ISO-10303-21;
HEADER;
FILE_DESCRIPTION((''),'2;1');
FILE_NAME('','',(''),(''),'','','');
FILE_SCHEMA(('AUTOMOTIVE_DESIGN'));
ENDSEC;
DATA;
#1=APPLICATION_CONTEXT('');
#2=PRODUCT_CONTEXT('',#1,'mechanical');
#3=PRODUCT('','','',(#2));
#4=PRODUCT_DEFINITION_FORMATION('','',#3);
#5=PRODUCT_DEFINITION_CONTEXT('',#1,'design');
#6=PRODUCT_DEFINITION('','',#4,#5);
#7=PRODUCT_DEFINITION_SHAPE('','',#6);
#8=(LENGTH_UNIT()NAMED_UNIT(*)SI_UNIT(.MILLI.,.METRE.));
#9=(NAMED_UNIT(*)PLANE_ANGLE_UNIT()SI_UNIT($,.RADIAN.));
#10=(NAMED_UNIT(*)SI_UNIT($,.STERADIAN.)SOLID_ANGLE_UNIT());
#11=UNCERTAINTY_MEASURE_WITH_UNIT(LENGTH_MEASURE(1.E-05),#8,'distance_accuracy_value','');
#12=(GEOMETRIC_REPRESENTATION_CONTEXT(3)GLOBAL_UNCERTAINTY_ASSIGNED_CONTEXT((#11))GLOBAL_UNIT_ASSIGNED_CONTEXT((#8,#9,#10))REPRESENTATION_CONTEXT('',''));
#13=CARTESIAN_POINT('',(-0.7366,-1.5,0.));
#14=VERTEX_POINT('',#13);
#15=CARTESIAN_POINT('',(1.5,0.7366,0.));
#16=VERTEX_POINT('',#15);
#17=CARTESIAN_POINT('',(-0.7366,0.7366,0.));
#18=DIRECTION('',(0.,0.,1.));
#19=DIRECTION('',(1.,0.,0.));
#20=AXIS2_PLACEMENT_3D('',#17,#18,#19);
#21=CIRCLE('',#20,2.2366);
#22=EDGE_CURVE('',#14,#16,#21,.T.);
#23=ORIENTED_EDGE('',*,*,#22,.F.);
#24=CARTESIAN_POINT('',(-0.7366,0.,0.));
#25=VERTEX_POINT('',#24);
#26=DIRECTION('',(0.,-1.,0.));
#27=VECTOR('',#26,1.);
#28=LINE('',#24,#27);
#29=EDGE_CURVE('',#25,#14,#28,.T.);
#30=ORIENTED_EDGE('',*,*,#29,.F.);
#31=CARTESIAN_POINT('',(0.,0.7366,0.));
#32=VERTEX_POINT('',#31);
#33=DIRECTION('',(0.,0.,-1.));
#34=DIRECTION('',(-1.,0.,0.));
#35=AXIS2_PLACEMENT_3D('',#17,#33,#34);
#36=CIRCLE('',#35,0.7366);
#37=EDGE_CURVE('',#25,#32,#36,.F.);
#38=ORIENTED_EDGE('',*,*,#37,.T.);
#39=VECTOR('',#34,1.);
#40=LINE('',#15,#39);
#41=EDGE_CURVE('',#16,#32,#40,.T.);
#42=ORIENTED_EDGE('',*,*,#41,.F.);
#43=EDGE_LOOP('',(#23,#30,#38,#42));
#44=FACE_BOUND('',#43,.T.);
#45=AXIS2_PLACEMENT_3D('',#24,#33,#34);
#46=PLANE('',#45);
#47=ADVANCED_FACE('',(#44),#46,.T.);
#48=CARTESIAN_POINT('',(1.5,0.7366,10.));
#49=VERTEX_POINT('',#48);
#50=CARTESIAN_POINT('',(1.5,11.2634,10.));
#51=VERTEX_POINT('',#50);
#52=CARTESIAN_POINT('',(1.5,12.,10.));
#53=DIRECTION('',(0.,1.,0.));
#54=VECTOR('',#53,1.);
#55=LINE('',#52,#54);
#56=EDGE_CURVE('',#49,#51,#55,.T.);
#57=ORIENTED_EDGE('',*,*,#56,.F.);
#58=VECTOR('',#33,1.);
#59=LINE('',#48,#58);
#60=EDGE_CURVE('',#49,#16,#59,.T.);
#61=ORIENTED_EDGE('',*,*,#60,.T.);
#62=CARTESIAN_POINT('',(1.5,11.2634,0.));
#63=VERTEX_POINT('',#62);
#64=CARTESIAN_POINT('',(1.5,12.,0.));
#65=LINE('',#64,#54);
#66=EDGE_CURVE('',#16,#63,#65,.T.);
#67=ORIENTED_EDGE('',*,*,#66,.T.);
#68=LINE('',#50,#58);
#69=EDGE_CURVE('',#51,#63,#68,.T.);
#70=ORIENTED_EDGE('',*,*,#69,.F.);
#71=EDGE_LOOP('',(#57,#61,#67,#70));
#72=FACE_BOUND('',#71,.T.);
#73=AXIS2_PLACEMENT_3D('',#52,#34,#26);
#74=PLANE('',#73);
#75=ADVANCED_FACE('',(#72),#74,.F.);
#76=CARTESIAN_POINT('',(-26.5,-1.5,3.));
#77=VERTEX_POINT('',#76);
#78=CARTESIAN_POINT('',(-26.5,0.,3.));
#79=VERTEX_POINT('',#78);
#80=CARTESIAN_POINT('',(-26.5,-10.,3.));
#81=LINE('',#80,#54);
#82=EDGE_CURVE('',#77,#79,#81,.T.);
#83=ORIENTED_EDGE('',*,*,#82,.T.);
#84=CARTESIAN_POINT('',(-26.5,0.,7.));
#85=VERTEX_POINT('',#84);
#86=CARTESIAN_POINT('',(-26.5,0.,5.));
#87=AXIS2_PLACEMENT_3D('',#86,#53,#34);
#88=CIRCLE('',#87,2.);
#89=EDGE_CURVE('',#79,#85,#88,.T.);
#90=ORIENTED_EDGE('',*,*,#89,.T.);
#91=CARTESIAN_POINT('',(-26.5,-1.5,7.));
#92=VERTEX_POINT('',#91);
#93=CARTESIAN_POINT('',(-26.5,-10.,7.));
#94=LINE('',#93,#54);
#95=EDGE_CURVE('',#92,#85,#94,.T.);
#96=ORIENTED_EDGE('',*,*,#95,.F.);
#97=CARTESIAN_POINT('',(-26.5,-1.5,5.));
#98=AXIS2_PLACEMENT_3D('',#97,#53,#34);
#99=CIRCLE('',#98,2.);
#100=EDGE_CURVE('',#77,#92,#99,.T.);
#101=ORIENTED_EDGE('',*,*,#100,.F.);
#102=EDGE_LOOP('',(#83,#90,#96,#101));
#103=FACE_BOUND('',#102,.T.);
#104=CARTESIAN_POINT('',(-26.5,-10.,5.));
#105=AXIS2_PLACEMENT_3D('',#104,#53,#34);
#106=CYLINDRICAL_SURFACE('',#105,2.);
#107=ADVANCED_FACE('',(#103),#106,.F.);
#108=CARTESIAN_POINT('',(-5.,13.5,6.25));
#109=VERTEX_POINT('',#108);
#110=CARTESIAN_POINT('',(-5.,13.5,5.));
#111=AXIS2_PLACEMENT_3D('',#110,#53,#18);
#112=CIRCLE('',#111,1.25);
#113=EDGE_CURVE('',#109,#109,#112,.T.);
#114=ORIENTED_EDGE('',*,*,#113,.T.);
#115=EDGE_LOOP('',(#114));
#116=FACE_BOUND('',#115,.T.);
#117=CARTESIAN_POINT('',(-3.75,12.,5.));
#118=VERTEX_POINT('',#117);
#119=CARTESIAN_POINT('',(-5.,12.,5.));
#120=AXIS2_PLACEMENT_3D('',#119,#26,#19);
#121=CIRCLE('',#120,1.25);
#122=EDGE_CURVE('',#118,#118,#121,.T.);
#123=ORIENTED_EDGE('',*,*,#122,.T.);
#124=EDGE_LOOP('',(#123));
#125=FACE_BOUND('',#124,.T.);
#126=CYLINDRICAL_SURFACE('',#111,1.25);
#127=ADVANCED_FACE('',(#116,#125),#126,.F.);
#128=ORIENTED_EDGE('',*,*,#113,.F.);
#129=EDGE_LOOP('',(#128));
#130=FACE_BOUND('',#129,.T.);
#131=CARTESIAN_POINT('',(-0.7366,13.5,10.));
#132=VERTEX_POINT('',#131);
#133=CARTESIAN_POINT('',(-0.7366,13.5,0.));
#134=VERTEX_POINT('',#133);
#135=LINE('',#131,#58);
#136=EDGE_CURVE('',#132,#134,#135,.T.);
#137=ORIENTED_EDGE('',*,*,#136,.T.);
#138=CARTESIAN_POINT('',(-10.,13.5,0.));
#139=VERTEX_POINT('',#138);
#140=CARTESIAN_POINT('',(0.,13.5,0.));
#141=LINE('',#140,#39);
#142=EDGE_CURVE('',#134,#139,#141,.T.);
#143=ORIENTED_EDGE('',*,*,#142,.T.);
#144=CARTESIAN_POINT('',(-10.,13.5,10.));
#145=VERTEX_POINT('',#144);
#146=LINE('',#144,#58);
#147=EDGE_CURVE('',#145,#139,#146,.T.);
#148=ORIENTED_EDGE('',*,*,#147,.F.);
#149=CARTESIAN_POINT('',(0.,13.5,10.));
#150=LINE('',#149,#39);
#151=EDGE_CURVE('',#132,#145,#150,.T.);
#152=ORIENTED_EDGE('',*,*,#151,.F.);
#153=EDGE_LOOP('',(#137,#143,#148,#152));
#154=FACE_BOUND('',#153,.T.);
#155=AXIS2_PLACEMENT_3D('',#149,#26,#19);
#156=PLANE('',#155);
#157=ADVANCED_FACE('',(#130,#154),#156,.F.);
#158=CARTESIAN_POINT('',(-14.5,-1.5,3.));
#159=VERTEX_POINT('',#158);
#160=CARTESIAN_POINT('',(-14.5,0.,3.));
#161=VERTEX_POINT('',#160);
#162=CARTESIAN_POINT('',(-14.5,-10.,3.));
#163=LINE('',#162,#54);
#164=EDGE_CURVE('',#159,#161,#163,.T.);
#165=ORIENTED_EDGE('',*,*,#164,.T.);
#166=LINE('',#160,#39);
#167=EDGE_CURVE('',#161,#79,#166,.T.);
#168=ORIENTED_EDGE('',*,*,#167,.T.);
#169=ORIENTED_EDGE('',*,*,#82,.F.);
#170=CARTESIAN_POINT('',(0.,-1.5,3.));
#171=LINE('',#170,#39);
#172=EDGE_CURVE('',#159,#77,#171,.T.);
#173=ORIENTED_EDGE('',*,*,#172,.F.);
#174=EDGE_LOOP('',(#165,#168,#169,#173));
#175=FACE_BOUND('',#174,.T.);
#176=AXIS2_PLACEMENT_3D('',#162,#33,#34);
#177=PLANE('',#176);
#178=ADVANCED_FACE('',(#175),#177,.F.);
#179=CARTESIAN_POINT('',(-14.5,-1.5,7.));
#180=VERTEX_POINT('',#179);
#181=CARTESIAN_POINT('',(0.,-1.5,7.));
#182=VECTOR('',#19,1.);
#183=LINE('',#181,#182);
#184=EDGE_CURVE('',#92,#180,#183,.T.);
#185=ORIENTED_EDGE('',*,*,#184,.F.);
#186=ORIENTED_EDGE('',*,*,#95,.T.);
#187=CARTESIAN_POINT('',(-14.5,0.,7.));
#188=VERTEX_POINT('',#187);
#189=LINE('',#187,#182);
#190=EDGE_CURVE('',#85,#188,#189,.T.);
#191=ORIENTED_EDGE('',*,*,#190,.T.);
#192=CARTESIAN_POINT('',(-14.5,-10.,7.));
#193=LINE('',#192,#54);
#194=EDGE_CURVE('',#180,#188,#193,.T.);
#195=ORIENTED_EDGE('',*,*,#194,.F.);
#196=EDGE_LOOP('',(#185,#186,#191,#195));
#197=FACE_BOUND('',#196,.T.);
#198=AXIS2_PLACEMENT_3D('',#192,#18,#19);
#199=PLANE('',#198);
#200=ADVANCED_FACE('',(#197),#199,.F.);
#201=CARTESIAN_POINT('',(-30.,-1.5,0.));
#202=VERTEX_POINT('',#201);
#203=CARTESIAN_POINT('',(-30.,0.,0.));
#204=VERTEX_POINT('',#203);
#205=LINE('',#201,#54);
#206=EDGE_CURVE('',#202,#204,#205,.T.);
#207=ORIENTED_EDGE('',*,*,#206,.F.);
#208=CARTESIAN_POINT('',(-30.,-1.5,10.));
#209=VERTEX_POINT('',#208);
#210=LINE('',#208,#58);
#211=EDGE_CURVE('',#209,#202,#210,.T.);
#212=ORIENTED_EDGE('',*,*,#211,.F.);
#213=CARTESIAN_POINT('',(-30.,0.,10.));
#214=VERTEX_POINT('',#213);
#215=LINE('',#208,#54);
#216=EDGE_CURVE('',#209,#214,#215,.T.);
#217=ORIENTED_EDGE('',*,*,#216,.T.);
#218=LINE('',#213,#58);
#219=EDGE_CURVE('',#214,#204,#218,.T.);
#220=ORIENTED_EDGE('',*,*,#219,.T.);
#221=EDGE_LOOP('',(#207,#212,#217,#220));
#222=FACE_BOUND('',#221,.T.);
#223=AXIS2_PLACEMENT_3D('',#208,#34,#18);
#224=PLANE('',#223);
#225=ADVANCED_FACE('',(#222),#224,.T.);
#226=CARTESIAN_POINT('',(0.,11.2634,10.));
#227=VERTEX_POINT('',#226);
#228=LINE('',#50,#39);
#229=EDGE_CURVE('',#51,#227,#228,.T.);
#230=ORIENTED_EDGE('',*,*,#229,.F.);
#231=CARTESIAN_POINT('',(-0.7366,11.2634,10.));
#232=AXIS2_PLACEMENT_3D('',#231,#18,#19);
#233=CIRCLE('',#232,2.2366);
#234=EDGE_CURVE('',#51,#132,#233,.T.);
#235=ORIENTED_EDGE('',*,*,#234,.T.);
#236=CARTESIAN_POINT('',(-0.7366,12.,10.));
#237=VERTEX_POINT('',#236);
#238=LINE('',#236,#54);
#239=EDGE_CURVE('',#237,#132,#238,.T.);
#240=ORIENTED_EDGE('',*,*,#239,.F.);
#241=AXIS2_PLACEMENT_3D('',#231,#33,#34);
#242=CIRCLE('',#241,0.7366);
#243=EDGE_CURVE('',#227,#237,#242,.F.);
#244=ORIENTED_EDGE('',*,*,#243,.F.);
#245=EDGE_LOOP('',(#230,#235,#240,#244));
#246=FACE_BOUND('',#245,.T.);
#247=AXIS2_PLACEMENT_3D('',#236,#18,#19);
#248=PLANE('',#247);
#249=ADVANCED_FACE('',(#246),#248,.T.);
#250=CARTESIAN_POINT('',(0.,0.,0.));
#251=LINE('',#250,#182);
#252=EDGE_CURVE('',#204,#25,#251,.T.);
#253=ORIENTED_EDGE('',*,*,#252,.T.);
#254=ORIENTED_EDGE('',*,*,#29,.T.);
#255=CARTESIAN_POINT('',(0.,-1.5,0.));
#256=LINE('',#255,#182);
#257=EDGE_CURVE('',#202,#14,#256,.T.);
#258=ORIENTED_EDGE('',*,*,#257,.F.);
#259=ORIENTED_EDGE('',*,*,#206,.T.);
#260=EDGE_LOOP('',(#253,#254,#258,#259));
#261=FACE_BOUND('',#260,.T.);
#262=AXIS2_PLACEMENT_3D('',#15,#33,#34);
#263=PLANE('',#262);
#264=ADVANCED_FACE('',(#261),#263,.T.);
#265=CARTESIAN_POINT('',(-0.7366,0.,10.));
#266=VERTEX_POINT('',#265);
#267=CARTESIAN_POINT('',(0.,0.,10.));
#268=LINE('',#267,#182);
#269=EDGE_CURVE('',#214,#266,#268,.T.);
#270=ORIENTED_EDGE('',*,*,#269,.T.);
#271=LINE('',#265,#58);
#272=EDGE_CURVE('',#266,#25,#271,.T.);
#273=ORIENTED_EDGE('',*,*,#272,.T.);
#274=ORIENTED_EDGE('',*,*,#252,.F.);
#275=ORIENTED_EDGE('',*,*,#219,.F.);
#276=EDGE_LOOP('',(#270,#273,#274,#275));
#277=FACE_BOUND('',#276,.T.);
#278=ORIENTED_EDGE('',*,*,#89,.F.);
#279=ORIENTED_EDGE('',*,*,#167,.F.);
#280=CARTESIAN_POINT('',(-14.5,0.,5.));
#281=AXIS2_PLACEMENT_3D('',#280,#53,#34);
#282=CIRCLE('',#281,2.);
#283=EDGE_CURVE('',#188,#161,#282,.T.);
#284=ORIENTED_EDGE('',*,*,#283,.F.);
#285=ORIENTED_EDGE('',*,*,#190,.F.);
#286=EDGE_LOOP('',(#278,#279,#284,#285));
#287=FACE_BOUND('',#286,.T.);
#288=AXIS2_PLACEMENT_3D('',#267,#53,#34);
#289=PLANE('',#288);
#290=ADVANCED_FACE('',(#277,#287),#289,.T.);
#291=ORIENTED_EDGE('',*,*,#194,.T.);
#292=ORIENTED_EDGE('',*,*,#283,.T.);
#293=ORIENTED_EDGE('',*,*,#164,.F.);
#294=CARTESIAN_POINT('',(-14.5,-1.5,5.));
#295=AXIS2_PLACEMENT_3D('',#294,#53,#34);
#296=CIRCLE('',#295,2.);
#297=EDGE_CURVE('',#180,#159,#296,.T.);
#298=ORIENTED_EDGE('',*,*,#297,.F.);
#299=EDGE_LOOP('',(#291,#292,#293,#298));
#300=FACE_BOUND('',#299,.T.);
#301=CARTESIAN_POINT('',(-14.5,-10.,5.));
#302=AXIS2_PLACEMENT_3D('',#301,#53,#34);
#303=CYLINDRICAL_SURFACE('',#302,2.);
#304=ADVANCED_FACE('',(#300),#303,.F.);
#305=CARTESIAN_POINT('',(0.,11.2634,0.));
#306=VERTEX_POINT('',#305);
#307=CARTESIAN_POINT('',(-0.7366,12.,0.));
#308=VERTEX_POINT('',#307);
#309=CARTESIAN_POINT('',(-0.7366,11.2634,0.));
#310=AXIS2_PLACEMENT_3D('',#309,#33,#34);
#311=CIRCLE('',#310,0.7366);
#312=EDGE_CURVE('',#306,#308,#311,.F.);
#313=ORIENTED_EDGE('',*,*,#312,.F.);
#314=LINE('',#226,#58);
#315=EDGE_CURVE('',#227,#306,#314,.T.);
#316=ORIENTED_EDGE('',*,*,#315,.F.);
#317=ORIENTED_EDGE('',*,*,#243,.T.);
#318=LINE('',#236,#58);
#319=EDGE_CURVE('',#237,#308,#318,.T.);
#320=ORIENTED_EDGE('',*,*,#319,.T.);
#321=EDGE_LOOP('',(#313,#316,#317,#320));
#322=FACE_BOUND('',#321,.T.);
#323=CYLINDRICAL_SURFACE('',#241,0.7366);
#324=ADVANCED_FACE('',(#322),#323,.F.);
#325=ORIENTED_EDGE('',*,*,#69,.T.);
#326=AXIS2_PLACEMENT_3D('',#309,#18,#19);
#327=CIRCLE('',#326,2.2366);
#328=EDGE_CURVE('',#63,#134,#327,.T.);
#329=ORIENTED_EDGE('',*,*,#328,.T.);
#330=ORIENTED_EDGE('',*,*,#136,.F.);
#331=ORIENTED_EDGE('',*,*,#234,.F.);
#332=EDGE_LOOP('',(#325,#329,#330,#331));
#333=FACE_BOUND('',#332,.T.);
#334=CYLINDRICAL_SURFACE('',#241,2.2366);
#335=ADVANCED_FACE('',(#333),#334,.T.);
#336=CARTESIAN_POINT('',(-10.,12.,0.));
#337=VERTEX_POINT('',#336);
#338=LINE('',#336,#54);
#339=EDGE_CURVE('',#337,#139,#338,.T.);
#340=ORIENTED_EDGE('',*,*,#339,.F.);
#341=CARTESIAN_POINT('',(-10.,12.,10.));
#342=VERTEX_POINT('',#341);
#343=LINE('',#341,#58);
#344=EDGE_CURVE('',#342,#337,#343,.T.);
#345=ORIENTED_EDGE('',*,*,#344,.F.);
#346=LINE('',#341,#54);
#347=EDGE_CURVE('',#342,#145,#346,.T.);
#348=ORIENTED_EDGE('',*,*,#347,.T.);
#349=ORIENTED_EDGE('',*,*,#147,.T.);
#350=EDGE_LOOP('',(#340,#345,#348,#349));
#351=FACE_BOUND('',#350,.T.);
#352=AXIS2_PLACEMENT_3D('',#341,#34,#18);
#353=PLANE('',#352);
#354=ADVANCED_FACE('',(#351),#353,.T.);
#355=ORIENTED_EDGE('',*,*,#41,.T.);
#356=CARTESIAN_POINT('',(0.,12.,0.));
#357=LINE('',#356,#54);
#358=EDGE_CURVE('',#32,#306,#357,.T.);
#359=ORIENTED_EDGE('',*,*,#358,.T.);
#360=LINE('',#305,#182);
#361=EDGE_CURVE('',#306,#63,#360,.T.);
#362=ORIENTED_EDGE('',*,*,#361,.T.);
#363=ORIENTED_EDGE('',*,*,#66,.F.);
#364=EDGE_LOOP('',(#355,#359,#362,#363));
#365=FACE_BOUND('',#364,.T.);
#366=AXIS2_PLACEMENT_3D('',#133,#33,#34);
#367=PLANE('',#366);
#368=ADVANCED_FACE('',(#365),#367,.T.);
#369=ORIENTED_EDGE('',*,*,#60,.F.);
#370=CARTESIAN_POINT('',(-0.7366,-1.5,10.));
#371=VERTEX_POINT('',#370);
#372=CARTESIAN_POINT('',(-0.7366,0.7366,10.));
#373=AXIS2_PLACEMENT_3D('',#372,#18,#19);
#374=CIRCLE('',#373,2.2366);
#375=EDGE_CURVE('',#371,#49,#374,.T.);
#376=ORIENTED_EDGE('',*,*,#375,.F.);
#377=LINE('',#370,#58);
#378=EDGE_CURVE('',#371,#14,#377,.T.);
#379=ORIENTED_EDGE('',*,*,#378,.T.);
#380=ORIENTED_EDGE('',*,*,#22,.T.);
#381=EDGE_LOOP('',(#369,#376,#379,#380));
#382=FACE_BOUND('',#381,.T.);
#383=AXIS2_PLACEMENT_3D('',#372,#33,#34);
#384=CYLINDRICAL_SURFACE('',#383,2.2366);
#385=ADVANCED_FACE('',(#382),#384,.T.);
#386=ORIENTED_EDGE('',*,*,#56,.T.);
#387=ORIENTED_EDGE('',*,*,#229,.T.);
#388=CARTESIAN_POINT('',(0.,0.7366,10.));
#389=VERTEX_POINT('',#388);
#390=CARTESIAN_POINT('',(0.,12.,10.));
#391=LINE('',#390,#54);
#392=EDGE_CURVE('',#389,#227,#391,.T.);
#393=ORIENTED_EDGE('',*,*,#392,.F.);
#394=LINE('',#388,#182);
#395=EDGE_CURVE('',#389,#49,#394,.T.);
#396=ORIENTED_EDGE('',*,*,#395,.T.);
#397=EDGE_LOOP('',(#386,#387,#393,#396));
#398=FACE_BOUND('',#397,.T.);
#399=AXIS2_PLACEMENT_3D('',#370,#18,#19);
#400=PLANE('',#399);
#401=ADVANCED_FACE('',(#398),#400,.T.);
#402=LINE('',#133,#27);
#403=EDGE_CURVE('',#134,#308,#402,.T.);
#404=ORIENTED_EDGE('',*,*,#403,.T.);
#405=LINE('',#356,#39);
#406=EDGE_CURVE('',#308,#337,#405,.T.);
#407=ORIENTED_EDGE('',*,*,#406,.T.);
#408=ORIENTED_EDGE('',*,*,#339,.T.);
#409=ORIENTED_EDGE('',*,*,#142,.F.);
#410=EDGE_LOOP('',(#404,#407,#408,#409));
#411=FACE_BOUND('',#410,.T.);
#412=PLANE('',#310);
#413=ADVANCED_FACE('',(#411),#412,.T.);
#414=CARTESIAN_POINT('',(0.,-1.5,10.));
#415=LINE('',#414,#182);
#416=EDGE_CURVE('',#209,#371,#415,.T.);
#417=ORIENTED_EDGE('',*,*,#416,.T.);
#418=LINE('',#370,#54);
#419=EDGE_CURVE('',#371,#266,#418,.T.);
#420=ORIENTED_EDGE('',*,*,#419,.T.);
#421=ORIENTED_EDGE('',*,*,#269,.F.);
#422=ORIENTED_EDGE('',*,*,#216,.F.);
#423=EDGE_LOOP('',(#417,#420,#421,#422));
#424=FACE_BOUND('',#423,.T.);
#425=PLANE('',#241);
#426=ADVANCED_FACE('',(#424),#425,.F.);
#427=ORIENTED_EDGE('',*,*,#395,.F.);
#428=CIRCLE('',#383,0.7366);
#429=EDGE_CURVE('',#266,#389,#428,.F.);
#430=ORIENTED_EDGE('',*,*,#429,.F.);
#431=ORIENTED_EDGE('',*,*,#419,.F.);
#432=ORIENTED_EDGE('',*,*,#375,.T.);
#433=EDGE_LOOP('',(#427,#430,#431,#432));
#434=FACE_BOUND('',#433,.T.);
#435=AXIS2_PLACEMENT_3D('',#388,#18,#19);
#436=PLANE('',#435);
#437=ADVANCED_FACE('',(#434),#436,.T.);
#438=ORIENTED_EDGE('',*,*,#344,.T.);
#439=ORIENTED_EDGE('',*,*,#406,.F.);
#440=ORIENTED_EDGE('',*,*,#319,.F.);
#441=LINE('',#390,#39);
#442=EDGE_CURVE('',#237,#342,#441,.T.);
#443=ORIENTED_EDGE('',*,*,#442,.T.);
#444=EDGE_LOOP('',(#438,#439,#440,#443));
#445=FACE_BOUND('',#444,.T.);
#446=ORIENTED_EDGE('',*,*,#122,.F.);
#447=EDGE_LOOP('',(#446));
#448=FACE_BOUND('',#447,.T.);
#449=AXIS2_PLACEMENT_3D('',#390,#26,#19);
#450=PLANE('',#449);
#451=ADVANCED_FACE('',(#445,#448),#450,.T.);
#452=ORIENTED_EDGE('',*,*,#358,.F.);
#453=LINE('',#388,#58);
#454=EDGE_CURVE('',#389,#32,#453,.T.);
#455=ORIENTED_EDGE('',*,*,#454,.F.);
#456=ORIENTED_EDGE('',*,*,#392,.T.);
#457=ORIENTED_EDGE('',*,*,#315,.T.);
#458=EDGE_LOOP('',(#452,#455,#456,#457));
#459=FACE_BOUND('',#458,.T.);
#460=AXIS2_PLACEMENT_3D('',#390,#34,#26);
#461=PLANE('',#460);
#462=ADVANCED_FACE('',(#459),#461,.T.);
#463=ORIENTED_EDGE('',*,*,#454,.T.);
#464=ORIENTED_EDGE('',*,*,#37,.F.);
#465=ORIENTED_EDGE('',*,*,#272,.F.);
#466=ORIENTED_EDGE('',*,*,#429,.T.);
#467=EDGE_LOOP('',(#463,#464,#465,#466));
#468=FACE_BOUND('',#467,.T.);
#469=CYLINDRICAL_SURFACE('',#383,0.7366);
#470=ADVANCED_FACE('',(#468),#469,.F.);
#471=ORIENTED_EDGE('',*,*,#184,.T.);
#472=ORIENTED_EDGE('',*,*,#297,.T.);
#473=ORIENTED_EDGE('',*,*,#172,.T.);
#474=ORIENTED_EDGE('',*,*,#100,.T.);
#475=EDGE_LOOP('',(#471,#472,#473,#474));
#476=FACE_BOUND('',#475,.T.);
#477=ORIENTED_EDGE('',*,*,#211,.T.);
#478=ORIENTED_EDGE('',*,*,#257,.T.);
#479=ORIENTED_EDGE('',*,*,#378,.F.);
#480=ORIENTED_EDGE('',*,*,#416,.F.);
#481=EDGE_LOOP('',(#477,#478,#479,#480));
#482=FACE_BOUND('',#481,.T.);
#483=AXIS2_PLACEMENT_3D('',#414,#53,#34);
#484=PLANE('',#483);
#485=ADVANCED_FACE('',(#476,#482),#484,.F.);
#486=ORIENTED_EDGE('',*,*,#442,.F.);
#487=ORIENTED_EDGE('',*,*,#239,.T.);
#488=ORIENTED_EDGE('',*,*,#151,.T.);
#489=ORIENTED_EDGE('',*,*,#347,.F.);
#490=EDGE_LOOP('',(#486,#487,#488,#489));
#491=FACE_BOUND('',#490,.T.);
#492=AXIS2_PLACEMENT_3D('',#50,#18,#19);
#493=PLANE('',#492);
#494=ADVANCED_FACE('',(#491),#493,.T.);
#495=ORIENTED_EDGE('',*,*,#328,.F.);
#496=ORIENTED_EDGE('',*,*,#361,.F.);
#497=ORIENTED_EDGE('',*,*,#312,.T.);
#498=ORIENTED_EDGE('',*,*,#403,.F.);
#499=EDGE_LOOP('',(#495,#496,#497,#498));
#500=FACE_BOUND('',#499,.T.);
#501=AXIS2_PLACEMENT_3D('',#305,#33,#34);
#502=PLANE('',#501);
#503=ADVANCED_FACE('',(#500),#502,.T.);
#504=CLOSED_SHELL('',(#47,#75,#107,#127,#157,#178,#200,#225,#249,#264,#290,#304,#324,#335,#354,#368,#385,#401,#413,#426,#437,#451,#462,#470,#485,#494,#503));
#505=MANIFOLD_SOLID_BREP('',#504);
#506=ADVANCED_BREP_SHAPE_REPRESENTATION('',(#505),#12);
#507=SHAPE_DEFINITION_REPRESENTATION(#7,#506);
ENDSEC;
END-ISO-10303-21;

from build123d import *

# Parameters (mm, degrees)
SM_BASE_FLANGE_1_DEPTH = 10
HOLE_WIZARD_M3_1_D     = 2.5
HOLE_WIZARD_M3_1_DEPTH = 1.5
F_4_0MM_1_D            = 4
CUT_EXTRUDE_1_DEPTH    = 10


# Sheet-metal steps are written as plain solids
with BuildPart() as part:
    # Sketch 1 → 基材-凸緣1 (new body)
    with BuildSketch(Plane.XY):
        with BuildLine():
            Line((-30, 0), (-0.7366, 0))
            ThreePointArc((-0.7366, 0), (-0.215745145, 0.215745145), (0, 0.7366))
            Line((0, 0.7366), (0, 11.2634))
            ThreePointArc((0, 11.2634), (-0.215745145, 11.784254855), (-0.7366, 12))
            Line((-0.7366, 12), (-10, 12))
            Line((-10, 12), (-10, 13.5))
            Line((-10, 13.5), (-0.7366, 13.5))
            ThreePointArc((-0.7366, 13.5), (0.844915027, 12.844915027), (1.5, 11.2634))
            Line((1.5, 11.2634), (1.5, 0.7366))
            ThreePointArc((1.5, 0.7366), (0.844915027, -0.844915027), (-0.7366, -1.5))
            Line((-0.7366, -1.5), (-30, -1.5))
            Line((-30, -1.5), (-30, 0))
        make_face()
    extrude(amount=SM_BASE_FLANGE_1_DEPTH)

    # M3 螺紋孔1
    with Locations(Plane(origin=(0, 13.5, 0), x_dir=(1, 0, 0), z_dir=(0, 1, 0))):
        with Locations((-5, -5)):
            Hole(HOLE_WIZARD_M3_1_D / 2, depth=HOLE_WIZARD_M3_1_DEPTH)

    # Ø4.0mm 定位孔1 (through all)
    with Locations(Plane(origin=(0, -1.5, 0), x_dir=(-1, 0, 0), z_dir=(0, -1, 0))):
        with Locations((26, -5), (18, -5)):
            Hole(F_4_0MM_1_D / 2)

    # 草圖11 → 除料-伸長1 (cut)
    with BuildSketch(Plane(origin=(0, 0, 0), x_dir=(1, 0, 0), z_dir=(0, 1, 0))):
        with BuildLine():
            Line((-14.5, -7), (-26.5, -7))
            ThreePointArc((-26.5, -7), (-28.5, -5), (-26.5, -3))
            Line((-26.5, -3), (-14.5, -3))
            ThreePointArc((-14.5, -3), (-12.5, -5), (-14.5, -7))
        make_face()
    extrude(amount=-CUT_EXTRUDE_1_DEPTH, mode=Mode.SUBTRACT)


solid = part.part
